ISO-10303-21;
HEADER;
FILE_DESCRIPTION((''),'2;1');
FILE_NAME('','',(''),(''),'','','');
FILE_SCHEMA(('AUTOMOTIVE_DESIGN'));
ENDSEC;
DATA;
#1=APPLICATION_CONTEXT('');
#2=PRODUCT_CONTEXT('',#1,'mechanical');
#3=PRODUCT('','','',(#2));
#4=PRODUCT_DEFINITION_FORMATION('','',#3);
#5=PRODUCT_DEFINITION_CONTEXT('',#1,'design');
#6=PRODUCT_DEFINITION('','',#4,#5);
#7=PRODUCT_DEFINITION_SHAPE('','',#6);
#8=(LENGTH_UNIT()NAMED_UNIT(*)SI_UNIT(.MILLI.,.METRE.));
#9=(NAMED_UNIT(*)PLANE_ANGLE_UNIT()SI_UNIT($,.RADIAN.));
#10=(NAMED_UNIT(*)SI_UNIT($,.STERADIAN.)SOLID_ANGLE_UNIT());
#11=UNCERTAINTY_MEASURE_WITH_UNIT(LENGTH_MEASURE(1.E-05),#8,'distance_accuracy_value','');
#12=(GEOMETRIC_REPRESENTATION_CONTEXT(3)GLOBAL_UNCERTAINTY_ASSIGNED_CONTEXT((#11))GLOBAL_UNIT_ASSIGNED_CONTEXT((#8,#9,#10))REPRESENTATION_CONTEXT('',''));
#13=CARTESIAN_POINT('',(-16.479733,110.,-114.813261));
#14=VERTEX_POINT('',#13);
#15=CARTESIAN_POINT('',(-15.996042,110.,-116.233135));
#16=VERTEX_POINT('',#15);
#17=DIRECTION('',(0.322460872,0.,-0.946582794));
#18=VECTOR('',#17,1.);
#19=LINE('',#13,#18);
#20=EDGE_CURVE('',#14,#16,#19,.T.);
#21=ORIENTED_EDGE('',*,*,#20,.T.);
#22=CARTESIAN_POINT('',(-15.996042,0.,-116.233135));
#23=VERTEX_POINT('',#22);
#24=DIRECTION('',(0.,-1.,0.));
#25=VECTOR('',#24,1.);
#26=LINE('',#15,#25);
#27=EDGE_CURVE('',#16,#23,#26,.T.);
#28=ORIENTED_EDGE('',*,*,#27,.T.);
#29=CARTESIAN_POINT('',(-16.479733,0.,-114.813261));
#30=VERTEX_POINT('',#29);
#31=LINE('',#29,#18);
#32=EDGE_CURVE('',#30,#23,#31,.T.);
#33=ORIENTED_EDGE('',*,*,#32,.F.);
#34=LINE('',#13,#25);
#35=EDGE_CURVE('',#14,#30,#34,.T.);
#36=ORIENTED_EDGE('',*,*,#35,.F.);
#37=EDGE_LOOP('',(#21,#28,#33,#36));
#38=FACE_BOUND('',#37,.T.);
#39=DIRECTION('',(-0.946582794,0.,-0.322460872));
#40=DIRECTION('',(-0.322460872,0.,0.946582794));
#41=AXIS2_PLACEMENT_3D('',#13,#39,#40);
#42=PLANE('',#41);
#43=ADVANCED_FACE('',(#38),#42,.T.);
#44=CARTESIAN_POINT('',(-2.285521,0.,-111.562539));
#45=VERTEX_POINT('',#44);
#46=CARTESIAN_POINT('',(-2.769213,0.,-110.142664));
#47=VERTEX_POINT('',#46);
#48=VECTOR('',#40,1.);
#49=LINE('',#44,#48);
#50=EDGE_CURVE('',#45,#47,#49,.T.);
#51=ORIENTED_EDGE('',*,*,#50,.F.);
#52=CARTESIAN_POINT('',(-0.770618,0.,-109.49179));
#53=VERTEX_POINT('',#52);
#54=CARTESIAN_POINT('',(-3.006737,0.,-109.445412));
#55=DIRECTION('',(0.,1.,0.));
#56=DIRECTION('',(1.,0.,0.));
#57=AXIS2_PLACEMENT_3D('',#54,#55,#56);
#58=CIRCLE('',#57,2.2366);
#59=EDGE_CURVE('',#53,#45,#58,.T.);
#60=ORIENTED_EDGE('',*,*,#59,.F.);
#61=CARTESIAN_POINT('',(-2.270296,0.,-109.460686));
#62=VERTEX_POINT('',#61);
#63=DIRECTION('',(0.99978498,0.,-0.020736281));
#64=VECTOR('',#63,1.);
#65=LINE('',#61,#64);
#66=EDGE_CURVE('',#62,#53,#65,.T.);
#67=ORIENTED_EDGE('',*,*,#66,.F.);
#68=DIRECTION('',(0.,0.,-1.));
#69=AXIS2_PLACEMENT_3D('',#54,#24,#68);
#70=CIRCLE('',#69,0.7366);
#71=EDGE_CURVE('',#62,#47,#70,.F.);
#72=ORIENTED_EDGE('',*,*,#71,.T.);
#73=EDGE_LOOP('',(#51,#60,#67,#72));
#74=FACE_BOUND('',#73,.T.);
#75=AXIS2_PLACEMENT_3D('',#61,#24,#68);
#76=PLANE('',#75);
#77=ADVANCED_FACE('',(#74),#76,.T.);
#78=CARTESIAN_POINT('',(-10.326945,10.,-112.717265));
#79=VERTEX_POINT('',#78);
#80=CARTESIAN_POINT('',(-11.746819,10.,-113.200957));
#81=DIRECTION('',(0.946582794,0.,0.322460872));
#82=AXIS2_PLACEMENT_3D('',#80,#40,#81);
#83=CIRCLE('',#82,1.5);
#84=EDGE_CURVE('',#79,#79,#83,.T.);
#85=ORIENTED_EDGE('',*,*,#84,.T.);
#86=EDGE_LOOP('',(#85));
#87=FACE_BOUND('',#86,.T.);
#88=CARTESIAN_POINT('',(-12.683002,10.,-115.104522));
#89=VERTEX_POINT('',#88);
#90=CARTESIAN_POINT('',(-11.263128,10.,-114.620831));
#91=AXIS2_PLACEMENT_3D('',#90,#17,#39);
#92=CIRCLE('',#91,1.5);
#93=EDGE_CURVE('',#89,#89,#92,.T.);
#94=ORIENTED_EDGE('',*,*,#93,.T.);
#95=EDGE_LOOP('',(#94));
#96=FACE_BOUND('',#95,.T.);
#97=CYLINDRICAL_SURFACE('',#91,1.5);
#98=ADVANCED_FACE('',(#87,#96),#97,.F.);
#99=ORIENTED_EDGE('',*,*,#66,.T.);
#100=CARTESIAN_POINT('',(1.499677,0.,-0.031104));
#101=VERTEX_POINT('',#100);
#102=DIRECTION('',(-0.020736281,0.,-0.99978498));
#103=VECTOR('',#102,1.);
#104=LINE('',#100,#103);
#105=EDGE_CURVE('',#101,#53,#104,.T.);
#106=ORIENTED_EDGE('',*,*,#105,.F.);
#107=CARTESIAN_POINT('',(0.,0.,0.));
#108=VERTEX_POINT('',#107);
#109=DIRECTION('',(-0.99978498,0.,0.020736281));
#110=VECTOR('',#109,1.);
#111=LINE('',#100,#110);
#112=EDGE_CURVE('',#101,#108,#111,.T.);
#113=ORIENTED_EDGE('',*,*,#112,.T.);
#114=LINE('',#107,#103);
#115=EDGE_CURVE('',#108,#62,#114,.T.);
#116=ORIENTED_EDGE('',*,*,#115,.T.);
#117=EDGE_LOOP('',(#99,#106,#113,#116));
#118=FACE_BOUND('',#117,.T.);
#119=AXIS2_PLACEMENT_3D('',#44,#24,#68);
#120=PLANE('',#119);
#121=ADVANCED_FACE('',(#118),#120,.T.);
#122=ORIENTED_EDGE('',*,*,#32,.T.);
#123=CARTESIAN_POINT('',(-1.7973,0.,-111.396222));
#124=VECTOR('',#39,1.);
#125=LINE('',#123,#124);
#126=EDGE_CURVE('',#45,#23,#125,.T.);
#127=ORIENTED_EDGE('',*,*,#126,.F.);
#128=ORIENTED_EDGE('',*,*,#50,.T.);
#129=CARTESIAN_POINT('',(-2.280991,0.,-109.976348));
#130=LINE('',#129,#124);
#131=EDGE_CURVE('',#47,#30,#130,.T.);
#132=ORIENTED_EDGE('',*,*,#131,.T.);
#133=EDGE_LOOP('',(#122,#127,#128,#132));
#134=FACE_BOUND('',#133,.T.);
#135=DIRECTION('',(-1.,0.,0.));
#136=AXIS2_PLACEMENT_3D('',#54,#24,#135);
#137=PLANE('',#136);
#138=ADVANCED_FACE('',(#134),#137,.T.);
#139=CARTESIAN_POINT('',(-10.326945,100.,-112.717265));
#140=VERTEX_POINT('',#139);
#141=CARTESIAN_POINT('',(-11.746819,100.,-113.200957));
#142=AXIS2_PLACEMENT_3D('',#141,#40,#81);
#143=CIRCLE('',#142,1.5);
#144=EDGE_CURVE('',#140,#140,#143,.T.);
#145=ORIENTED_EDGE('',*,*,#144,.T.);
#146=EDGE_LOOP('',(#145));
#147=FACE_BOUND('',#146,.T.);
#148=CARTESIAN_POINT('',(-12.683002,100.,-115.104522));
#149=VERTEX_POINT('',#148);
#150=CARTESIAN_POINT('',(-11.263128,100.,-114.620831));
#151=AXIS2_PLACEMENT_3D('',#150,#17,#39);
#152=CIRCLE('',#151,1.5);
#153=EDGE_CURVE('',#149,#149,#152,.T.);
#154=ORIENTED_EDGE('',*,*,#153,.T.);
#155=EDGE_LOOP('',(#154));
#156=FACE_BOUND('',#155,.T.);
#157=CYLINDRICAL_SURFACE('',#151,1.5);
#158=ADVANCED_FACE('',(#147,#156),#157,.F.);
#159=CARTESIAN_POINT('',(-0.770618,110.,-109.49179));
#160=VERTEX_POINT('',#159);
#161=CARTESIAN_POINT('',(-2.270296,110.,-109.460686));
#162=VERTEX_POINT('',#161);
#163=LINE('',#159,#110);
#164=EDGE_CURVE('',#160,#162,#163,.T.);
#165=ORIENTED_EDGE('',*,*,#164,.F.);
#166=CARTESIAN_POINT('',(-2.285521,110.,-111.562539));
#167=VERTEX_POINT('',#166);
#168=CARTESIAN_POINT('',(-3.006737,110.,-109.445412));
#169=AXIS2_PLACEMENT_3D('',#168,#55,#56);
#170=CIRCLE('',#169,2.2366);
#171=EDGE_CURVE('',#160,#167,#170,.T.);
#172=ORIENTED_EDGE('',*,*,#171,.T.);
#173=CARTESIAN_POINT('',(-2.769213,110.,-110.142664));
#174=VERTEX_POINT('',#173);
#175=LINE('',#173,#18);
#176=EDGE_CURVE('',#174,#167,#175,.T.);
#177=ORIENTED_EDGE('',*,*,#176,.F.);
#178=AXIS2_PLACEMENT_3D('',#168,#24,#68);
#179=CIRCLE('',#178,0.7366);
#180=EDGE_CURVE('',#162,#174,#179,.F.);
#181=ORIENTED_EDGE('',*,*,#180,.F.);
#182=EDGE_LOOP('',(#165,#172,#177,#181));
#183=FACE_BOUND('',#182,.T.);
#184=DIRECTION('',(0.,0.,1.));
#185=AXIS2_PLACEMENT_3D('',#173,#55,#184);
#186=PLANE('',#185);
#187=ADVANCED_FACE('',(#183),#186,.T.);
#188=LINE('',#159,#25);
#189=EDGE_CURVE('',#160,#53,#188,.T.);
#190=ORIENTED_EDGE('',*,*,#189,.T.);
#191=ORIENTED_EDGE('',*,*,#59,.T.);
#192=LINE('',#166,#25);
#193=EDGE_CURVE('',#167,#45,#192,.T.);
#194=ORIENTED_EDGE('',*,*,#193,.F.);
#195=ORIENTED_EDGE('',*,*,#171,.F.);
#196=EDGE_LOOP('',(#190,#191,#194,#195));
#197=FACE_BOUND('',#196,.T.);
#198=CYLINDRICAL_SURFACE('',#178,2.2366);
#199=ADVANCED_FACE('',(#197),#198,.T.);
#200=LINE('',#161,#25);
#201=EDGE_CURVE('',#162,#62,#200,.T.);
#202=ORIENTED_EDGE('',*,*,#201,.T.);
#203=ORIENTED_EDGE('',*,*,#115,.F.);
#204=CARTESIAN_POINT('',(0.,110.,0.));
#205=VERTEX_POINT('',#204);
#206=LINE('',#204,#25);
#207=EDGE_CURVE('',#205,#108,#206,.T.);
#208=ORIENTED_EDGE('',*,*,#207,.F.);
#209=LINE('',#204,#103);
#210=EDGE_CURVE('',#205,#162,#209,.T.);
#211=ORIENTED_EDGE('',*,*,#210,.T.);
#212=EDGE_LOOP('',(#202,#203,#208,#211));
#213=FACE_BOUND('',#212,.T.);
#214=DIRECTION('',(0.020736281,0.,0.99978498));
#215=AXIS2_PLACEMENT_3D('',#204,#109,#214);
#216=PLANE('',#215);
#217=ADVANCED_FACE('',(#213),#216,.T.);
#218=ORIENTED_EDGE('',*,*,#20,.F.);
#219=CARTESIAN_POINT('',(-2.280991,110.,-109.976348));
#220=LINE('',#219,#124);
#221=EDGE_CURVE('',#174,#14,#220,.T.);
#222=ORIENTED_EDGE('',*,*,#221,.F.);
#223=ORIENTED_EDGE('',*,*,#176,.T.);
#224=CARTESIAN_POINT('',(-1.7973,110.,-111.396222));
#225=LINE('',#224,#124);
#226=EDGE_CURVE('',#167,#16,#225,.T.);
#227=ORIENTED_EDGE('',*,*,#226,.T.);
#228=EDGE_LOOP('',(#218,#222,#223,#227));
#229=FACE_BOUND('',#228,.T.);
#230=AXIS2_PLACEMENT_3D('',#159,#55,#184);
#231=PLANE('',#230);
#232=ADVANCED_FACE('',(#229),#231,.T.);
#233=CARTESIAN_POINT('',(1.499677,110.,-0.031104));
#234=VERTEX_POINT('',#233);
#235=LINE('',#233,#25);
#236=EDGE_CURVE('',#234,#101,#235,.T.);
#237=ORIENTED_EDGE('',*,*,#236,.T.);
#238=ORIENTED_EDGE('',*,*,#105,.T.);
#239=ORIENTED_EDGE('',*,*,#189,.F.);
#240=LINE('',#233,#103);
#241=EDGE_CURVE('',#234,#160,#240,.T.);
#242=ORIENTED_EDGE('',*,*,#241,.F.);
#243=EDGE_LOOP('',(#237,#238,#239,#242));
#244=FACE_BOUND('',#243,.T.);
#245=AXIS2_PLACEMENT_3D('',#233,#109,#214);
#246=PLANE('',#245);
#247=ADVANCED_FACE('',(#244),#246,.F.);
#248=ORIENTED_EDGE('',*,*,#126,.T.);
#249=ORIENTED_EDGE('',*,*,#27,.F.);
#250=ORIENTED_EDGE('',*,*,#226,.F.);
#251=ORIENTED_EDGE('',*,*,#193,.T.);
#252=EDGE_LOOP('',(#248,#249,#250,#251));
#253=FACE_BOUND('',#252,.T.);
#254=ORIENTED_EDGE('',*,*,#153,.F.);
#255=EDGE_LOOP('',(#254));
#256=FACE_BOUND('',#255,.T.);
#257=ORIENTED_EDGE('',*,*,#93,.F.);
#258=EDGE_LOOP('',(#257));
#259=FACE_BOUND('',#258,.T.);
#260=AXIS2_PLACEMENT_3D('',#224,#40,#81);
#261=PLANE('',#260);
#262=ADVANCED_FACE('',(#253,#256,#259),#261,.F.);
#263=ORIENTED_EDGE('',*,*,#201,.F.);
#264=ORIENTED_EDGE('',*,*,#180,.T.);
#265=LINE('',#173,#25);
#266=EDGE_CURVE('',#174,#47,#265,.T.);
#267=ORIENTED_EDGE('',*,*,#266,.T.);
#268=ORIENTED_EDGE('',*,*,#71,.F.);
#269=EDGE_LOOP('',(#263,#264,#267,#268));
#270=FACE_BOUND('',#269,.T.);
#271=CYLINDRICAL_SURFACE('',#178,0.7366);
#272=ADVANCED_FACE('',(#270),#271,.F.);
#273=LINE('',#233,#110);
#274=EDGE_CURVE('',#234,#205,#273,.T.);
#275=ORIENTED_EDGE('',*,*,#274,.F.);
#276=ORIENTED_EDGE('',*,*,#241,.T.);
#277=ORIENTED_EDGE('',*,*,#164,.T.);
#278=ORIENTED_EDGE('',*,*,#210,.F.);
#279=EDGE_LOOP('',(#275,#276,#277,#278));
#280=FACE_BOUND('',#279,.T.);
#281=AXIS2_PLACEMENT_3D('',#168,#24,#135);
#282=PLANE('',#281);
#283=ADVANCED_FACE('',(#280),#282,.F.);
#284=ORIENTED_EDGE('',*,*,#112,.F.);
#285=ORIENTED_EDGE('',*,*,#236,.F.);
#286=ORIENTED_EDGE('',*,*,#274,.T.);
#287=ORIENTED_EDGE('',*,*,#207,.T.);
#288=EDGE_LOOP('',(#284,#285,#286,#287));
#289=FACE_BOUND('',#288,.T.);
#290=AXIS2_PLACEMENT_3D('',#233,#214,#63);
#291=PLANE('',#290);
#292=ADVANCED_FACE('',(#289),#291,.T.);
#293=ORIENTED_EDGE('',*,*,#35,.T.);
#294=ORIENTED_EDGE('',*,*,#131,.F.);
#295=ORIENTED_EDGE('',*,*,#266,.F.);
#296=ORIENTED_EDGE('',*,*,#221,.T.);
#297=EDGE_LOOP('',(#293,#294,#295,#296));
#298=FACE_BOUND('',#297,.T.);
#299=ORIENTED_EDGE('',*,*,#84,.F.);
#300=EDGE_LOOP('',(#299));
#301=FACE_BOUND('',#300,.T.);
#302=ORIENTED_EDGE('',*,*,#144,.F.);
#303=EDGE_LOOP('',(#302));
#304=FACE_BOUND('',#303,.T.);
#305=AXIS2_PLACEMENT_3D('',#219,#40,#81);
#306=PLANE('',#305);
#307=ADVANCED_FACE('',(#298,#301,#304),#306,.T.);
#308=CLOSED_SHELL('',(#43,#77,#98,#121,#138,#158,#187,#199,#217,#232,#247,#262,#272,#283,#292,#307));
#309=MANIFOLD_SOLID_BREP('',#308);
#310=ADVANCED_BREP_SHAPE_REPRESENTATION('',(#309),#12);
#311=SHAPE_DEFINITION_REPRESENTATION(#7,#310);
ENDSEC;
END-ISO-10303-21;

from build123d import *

# Parameters (mm, degrees)
BASE_FLANGE1_DEPTH          = 110
F_3_0MM_PRESS_DOWEL_HOLE1_D = 3


# Sheet-metal steps are written as plain solids
with BuildPart() as part:
    # Sketch1 → Base-Flange1 (new body)
    with BuildSketch(Plane(origin=(0, 0, 0), x_dir=(1, 0, 0), z_dir=(0, 1, 0))):
        with BuildLine():
            Line((0, 0), (-2.270295707, 109.460685851))
            ThreePointArc((-2.270295707, 109.460685851), (-2.412240672, 109.880329075), (-2.769212645, 110.142664393))
            Line((-2.769212645, 110.142664393), (-16.479732829, 114.813260902))
            Line((-16.479732829, 114.813260902), (-15.996041521, 116.233135093))
            Line((-15.996041521, 116.233135093), (-2.285521337, 111.562538584))
            ThreePointArc((-2.285521337, 111.562538584), (-1.201617569, 110.765987985), (-0.770618236, 109.491790273))
            Line((-0.770618236, 109.491790273), (1.49967747, 0.031104422))
            Line((1.49967747, 0.031104422), (0, 0))
        make_face()
    extrude(amount=BASE_FLANGE1_DEPTH)

    # Ø3.0mm Press Dowel Hole1 (through all)
    with Locations(Plane(origin=(33.81524251, 0, -99.264529514), x_dir=(-0.9465827940969574, 0, -0.32246087192029516), z_dir=(0.32246087192029516, 0, -0.9465827940969574))):
        with Locations((47.622215766, 10), (47.622215766, 100)):
            Hole(F_3_0MM_PRESS_DOWEL_HOLE1_D / 2)


solid = part.part
